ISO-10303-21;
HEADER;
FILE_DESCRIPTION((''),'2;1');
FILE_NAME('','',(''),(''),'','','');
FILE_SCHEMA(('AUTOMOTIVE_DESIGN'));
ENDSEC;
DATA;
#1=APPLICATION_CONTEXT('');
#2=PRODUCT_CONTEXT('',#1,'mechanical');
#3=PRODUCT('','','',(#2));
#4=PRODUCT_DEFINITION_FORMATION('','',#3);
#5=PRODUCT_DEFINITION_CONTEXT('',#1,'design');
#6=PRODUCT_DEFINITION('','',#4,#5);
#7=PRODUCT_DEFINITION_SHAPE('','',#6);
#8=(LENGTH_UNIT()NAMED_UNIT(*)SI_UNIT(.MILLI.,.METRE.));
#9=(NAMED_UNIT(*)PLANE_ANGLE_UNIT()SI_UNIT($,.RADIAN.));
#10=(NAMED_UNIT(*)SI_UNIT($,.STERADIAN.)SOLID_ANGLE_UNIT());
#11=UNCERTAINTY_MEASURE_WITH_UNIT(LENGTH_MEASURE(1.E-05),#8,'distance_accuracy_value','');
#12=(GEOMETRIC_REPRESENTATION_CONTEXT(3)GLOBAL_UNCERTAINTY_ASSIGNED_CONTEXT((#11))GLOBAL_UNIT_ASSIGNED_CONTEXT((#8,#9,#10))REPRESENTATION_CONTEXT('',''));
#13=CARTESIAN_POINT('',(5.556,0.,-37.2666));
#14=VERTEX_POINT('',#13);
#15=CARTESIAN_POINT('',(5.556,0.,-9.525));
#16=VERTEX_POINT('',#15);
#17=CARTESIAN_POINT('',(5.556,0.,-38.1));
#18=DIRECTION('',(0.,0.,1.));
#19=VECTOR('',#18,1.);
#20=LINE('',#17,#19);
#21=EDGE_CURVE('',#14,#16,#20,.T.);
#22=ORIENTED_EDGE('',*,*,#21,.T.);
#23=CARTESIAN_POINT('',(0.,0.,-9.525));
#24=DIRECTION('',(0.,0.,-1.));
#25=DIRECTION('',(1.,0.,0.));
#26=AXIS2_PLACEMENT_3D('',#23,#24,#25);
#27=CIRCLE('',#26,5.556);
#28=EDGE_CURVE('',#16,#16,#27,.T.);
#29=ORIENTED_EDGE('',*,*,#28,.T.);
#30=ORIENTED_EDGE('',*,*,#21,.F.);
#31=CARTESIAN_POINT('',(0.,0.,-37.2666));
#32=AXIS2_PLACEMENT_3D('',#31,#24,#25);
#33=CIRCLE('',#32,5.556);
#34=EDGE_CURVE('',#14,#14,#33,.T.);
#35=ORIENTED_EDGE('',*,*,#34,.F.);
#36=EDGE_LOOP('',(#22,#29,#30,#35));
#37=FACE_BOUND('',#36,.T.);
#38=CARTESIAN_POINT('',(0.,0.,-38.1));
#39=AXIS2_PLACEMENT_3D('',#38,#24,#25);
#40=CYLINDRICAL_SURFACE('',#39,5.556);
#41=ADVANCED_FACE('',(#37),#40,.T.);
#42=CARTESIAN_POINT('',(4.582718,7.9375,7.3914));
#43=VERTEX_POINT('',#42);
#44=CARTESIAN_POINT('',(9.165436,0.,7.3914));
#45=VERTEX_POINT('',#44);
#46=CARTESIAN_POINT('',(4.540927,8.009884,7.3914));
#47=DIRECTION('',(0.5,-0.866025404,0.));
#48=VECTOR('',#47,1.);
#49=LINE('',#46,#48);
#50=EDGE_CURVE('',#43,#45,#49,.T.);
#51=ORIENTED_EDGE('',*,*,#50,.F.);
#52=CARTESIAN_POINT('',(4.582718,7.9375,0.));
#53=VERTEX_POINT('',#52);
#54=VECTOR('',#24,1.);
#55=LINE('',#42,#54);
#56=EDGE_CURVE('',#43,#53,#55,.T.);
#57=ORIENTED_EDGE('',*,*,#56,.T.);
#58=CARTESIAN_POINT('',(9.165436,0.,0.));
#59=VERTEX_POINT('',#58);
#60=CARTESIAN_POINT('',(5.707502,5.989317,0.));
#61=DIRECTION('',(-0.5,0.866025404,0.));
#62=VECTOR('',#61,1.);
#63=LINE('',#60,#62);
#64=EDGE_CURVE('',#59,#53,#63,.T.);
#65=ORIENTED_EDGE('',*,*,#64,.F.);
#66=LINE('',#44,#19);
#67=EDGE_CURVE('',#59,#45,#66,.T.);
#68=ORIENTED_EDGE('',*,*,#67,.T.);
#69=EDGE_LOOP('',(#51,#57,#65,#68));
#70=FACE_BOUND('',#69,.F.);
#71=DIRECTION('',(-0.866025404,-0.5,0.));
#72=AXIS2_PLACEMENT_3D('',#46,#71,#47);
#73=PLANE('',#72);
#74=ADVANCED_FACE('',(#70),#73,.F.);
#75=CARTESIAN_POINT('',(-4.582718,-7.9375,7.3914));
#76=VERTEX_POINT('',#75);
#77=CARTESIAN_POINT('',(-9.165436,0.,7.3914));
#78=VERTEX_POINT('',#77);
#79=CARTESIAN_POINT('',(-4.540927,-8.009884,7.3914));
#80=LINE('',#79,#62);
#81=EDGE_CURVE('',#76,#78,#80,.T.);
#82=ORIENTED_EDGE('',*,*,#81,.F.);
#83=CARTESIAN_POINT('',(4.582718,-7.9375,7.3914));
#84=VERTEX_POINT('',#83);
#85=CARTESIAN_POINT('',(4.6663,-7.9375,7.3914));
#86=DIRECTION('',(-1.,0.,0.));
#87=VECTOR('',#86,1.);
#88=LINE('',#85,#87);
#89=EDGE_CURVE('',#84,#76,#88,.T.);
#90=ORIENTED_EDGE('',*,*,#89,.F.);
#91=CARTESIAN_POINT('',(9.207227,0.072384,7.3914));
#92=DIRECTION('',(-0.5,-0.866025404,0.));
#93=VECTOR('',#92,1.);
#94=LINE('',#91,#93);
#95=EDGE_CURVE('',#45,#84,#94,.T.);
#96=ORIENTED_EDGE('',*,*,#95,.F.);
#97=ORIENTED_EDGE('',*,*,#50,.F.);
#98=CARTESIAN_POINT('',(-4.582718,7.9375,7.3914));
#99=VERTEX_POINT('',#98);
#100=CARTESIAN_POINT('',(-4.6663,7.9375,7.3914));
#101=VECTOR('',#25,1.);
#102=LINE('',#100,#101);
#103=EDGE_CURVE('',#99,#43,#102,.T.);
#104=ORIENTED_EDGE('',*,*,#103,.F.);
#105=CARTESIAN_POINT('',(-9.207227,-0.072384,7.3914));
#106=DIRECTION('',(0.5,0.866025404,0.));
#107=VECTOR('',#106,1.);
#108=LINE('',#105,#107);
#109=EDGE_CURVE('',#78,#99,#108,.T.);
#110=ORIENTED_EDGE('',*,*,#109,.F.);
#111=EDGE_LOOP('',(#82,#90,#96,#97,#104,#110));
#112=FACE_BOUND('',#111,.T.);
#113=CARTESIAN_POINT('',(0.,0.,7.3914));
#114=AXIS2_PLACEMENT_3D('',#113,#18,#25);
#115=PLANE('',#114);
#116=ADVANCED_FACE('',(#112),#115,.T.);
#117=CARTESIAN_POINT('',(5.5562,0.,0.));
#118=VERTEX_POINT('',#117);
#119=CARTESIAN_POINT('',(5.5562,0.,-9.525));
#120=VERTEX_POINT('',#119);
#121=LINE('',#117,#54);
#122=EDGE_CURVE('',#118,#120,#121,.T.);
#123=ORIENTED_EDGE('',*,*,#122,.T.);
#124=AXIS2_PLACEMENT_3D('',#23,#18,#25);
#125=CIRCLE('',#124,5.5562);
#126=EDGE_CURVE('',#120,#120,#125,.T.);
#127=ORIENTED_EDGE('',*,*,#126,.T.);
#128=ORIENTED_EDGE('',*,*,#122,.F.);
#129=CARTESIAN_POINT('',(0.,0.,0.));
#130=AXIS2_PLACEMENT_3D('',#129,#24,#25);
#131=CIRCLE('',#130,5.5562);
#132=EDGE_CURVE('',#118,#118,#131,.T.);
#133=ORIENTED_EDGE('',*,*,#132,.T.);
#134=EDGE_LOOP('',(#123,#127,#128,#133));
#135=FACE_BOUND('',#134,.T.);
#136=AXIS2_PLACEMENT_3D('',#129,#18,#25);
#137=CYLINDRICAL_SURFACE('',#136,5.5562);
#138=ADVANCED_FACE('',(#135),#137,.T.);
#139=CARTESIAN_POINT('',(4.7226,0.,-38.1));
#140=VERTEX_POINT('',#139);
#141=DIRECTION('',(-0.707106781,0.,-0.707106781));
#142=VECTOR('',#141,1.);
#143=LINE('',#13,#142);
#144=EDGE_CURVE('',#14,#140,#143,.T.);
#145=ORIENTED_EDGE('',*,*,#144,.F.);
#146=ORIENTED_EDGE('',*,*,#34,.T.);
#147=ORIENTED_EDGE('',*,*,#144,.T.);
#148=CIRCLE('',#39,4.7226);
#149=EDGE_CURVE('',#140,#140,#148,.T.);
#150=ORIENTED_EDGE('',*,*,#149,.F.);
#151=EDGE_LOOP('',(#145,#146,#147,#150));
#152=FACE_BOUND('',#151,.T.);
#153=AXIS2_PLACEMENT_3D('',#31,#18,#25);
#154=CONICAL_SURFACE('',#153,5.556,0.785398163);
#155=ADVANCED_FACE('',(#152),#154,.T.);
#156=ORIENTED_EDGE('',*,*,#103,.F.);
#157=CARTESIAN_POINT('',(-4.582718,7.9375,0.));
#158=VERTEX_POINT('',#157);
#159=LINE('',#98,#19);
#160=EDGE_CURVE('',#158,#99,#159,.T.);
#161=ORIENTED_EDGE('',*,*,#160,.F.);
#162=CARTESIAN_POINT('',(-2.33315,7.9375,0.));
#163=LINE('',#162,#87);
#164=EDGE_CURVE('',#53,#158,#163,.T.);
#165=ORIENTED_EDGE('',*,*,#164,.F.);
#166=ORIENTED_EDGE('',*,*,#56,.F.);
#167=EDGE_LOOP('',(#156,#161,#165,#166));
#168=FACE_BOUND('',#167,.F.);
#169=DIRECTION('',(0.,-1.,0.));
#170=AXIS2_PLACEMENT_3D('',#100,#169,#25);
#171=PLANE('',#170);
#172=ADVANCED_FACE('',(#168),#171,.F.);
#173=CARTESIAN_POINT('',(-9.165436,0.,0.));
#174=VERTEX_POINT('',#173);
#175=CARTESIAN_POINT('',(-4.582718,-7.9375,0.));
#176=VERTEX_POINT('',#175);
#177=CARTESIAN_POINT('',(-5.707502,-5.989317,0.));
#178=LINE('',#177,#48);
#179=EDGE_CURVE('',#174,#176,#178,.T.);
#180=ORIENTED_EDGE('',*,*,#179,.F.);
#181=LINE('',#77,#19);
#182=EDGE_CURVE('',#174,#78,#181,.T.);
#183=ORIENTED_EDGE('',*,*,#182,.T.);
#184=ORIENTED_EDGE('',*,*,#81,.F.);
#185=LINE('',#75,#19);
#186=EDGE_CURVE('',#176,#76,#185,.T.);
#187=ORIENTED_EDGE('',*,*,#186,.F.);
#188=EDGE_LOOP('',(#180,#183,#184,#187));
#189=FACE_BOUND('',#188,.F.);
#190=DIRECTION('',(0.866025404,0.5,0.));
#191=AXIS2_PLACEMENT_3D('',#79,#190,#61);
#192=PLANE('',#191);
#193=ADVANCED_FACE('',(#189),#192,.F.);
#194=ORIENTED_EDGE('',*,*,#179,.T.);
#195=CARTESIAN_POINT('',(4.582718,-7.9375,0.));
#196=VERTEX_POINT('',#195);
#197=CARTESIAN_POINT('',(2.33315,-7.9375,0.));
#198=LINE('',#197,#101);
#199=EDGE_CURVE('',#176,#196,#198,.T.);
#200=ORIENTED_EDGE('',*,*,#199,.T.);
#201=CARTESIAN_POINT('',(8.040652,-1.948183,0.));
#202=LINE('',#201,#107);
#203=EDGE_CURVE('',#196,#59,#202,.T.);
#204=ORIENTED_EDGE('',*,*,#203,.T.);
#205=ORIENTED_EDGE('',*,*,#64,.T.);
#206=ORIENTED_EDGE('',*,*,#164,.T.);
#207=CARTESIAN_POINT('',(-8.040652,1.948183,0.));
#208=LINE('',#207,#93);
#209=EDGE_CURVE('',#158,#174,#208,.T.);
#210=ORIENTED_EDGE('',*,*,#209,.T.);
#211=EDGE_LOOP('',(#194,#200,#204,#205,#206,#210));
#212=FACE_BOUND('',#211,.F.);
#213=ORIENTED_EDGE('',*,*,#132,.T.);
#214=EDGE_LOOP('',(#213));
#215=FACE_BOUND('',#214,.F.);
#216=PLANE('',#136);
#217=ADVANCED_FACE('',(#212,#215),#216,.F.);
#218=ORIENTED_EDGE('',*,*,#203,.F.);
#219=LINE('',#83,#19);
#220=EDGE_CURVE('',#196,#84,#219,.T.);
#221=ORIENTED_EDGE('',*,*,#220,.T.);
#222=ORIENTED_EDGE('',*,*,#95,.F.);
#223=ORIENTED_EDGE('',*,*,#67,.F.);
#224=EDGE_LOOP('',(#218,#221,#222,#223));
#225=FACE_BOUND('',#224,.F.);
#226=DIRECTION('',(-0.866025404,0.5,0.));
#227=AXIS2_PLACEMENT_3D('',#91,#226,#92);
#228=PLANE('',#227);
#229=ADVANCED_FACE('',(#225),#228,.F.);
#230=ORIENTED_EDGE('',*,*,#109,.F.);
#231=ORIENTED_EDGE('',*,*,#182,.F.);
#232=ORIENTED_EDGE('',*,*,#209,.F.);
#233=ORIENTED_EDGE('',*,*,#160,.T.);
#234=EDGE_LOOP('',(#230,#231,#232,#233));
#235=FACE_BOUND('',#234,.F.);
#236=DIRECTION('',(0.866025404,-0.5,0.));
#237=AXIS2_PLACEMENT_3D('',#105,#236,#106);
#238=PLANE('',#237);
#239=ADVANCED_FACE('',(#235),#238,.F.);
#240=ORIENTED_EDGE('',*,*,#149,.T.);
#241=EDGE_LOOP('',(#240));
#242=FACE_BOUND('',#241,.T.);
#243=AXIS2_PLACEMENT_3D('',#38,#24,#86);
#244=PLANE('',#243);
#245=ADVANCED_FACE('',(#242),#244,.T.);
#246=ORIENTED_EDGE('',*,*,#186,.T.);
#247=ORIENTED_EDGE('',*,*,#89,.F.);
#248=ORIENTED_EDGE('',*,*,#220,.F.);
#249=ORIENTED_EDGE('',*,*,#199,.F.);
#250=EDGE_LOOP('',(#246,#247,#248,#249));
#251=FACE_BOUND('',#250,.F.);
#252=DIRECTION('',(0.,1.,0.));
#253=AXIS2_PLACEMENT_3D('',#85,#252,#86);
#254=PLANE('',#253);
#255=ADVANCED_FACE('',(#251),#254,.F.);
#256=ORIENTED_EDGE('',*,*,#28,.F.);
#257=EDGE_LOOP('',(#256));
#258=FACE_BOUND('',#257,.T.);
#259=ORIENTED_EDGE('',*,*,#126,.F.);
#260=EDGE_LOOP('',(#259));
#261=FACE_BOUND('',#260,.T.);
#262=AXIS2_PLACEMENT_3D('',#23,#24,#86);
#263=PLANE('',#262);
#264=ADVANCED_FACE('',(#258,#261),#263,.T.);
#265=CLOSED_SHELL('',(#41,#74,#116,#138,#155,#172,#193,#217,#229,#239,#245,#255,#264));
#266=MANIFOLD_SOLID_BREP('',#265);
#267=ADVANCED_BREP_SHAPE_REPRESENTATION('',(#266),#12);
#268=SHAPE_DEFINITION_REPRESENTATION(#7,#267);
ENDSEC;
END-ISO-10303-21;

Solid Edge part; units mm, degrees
sketch "Sketch1" plane through (0, 0, 0) normal (0, 0, 1) x (1, 0, 0)
  circle A0 centre (0, 0) radius 9.2075
  dimension "D1" = 18.415
extrude "Protrusion1" add sketch "Sketch1" along normal blind 7.3914
sketch "Sketch2" plane through (0, 0, 0) normal (0, 0, -1) x (1, 0, 0)
  circle A0 centre (0, 0) radius 5.5562
extrude "Protrusion2" add sketch "Sketch2" along normal blind 38.1
sketch "Sketch3" plane through (0, 0, -38.1) normal (0, 0, -1) x (1, 0, 0)
  circle A0 centre (0, 0) radius 5.556
extrude "Cutout1" cut sketch "Sketch3" against normal blind 28.575 flip side to cut
chamfer "Chamfer_1" distance 0.8334 angle 45 1 edges at (-5.556, 0, -38.1)
sketch "Sketch4" plane through (0, 0, 7.3914) normal (0, 0, 1) x (1, 0, 0)
  line L0 (-4.6663, 7.9375) -> (4.6663, 7.9375)
  dimension "D1" = 15.875
extrude "Cutout2" cut sketch "Sketch4" against normal up to next material side at (0, 7.9875, 7.3914)
pattern_circular "Pattern1" count 6 over 360 about axis through (0, 0, 7.3914) along (0, 0, 1) of "Cutout2"
properties part number "24100023"
